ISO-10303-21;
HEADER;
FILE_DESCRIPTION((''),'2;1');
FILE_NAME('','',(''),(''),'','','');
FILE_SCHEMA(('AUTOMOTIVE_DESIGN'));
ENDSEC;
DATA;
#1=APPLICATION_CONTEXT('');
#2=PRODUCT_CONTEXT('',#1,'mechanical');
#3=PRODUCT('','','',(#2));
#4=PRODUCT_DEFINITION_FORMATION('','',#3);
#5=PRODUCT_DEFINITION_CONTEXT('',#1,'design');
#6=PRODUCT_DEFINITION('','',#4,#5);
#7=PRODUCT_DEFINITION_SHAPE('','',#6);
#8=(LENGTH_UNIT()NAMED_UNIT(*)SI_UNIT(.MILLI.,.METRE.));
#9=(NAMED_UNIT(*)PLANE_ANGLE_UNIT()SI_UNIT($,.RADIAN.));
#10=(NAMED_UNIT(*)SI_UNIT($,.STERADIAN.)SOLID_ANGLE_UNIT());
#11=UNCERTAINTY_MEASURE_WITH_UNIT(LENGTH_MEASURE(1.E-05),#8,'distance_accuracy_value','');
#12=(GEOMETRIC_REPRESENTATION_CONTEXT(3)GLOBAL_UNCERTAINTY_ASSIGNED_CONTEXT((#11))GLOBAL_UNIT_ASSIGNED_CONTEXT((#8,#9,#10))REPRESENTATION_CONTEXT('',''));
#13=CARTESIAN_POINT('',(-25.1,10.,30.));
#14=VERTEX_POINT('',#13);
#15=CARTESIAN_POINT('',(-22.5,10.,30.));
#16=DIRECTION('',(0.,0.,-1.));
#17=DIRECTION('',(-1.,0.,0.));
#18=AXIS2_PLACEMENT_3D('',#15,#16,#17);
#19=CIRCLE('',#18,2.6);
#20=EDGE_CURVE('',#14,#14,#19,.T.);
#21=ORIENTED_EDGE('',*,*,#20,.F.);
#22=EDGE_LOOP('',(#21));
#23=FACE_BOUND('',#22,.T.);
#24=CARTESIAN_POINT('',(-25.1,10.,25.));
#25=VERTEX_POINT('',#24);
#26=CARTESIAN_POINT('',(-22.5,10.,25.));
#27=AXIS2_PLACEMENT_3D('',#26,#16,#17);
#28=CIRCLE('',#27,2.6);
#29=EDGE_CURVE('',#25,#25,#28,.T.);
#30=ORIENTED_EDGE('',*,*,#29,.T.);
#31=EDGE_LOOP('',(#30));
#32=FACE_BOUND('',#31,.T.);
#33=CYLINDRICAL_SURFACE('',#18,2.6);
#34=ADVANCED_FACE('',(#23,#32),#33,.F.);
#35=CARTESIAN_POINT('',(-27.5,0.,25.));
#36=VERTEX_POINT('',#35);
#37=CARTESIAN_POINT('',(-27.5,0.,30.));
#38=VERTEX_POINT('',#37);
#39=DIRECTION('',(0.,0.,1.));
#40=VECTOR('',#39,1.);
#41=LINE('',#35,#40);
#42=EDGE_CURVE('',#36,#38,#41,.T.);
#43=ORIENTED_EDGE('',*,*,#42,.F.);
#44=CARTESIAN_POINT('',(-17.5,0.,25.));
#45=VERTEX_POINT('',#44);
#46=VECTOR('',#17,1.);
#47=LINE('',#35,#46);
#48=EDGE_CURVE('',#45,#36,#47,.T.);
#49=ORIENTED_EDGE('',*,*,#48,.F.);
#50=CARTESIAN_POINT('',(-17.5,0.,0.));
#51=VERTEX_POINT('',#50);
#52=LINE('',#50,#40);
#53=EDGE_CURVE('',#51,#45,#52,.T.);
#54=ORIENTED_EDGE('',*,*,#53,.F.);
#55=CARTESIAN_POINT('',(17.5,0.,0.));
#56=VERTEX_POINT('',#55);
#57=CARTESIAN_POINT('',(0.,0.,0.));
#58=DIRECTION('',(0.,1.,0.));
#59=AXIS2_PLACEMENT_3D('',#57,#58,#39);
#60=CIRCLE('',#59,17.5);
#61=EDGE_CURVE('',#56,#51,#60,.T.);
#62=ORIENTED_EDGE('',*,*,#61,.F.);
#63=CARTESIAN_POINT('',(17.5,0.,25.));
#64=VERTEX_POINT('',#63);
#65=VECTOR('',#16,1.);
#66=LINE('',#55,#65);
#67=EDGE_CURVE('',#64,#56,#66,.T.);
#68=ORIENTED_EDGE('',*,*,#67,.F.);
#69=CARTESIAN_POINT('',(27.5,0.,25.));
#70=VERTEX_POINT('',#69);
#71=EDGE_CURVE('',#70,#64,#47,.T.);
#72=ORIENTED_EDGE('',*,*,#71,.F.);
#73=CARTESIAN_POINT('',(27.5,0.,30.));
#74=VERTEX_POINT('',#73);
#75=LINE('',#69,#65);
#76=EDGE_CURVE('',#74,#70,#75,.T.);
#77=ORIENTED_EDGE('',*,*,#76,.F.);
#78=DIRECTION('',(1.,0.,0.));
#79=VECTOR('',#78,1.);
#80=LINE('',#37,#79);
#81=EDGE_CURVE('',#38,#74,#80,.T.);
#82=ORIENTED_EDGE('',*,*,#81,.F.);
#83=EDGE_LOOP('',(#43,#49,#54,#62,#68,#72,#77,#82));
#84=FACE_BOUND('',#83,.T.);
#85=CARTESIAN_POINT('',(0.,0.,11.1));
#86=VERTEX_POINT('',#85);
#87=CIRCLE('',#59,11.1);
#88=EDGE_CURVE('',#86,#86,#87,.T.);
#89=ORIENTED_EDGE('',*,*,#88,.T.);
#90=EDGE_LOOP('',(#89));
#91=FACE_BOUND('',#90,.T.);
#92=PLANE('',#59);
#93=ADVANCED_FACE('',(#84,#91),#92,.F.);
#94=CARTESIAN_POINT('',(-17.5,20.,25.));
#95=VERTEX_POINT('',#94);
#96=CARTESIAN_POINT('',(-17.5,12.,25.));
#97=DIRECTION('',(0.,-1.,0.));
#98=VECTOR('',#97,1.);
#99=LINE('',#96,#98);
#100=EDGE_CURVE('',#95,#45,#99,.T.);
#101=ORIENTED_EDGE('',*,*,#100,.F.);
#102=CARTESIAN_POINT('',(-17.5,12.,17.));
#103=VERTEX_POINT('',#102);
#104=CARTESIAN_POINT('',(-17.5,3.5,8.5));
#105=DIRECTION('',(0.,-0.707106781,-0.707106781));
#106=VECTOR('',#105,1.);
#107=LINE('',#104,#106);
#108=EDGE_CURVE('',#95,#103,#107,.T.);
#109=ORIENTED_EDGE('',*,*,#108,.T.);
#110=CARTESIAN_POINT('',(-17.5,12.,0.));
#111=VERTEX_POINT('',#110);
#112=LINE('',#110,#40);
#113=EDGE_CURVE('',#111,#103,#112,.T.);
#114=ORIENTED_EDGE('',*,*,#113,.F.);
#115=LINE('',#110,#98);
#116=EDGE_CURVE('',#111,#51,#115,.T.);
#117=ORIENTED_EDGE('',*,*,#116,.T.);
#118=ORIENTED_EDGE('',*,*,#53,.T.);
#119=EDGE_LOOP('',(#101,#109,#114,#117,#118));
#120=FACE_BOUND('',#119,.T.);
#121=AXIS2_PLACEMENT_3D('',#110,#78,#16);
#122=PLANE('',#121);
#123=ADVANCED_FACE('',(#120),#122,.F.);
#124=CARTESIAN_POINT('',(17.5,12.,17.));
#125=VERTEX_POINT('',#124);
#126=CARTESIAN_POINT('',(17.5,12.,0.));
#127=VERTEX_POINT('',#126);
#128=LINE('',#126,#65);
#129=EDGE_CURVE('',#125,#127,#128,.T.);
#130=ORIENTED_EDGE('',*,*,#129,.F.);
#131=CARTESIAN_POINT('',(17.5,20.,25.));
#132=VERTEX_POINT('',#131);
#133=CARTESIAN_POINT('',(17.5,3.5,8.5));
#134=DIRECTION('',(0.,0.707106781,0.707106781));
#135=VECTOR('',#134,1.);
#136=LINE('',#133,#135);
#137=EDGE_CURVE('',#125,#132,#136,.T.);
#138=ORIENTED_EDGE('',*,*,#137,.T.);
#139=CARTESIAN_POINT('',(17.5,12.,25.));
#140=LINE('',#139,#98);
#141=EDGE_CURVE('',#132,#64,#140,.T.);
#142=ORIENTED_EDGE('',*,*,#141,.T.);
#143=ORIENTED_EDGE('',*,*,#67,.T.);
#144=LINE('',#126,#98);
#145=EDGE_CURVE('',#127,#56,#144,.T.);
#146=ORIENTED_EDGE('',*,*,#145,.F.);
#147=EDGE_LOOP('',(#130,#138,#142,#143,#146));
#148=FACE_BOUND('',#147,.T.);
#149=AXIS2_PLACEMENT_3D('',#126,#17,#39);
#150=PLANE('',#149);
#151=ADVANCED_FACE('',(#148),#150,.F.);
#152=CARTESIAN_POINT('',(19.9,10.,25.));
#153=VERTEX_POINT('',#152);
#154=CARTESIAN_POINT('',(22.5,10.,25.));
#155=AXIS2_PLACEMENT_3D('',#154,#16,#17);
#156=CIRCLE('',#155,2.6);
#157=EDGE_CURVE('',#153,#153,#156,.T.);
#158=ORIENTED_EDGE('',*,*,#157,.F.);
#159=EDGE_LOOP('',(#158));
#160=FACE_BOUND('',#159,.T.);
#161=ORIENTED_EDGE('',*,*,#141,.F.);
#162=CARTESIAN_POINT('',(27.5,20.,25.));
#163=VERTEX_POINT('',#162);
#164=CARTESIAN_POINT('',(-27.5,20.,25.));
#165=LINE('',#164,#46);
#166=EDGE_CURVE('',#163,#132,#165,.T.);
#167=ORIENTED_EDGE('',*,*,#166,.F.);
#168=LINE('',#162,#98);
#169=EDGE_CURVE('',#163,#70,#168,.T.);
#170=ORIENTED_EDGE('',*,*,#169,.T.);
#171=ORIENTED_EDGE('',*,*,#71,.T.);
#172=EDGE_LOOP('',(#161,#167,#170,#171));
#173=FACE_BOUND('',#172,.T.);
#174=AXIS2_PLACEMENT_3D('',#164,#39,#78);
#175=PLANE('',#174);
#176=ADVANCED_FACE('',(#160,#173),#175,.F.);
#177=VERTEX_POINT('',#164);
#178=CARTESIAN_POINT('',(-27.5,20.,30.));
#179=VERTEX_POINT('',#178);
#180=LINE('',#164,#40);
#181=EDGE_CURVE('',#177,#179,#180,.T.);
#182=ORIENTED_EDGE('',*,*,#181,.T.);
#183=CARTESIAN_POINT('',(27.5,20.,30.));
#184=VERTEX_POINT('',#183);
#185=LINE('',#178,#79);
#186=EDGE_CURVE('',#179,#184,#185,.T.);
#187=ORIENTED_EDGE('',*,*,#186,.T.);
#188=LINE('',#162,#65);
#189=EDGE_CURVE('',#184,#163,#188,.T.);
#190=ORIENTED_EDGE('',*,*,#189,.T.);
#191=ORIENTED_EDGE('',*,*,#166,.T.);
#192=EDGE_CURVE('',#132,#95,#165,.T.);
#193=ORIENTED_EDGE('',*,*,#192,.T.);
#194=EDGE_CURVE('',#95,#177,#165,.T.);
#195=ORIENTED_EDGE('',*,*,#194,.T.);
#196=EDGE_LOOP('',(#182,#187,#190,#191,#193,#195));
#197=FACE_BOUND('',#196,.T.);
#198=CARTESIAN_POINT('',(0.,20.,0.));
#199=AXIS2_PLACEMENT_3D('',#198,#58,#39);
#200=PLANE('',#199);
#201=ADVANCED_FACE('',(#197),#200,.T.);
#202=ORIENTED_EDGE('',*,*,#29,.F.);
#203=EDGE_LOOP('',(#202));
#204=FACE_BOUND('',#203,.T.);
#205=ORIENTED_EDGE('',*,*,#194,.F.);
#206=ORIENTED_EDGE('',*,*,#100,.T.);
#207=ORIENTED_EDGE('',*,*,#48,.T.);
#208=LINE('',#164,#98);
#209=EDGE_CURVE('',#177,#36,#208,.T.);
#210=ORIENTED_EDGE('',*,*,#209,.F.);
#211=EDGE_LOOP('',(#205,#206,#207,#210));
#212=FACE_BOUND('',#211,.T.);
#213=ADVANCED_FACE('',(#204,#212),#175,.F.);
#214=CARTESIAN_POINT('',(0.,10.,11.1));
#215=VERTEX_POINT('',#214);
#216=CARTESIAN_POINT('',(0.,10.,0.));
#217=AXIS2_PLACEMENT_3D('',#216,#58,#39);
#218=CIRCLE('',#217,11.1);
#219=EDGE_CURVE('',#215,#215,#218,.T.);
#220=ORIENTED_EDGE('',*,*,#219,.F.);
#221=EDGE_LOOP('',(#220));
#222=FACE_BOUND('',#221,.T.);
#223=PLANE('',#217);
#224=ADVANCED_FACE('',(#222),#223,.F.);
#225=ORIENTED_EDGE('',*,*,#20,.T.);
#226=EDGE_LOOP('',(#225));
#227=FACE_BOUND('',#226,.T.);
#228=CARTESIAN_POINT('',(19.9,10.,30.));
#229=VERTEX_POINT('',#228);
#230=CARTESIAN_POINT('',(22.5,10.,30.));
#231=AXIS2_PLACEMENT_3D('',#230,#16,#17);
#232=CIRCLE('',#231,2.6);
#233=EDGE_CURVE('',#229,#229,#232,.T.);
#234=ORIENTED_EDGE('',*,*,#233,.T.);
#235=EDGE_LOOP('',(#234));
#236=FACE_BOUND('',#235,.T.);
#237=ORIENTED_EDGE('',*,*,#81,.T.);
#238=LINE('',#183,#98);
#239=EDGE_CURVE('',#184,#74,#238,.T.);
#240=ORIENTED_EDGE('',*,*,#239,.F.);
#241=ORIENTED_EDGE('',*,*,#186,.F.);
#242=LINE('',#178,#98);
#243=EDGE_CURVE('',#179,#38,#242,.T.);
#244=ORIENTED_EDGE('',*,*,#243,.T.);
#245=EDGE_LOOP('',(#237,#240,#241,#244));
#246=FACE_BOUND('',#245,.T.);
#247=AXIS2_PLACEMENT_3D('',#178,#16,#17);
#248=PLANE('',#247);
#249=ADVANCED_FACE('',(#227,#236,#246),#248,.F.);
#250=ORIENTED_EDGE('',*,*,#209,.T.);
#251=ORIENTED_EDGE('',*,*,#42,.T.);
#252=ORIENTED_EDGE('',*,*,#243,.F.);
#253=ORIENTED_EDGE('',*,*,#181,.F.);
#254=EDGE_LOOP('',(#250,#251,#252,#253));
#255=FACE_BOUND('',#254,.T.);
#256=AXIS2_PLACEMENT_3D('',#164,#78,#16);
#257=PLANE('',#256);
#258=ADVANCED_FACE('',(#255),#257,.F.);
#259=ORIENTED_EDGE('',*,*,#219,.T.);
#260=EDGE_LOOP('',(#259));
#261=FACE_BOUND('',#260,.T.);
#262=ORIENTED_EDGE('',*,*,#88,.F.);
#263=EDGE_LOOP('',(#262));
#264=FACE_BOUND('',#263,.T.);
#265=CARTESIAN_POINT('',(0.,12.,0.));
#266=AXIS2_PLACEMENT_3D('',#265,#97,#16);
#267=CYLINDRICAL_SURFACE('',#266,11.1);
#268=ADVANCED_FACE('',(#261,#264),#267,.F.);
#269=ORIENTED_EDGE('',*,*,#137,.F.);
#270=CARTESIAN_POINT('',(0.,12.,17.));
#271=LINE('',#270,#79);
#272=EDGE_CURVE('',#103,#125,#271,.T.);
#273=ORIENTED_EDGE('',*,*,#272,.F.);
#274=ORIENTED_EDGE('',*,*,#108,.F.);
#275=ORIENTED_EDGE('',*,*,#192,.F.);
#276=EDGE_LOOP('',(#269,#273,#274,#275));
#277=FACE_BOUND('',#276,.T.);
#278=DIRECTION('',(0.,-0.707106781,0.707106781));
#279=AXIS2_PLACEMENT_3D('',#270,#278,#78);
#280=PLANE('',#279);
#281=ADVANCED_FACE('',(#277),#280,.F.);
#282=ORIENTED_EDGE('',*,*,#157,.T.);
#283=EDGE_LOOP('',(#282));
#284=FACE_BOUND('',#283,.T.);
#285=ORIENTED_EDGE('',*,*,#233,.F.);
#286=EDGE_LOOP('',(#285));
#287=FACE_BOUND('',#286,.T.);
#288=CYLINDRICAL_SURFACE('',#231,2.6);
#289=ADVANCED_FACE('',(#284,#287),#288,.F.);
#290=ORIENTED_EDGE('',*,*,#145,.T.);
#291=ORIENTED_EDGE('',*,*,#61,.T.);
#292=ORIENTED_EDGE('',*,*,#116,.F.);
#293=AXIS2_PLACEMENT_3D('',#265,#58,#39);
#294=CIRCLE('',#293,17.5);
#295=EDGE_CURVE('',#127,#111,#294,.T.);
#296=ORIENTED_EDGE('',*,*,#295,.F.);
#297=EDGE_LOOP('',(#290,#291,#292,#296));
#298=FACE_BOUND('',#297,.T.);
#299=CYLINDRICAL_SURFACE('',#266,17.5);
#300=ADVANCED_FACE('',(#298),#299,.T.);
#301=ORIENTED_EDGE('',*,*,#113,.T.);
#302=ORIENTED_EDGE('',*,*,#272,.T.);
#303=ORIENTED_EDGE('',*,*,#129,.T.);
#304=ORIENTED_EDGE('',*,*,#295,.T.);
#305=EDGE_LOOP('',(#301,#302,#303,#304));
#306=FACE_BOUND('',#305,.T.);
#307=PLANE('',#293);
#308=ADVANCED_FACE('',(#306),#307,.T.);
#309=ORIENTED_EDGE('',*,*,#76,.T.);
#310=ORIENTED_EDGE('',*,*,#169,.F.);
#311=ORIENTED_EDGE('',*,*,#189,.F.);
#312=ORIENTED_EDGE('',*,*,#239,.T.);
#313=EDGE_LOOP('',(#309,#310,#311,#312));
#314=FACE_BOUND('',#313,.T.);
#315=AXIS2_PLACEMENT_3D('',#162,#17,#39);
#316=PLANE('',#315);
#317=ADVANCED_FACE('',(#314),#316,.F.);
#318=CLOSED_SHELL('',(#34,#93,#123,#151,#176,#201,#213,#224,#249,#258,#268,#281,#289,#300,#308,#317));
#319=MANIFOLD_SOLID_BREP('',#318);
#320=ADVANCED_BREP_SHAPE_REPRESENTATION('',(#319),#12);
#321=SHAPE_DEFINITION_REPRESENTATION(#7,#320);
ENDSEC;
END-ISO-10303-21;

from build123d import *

# Parameters (mm, degrees)
SKETCH1_R           = 11.1
BOSS_EXTRUDE1_DEPTH = 12
BOSS_EXTRUDE2_START = -2
SKETCH3_R           = 11.1
BOSS_EXTRUDE2_DEPTH = 2
SKETCH4_W           = 55
SKETCH4_H           = 5
BOSS_EXTRUDE3_DEPTH = 20
SKETCH5_R           = 2.6
CUT_EXTRUDE1_DEPTH  = 55.428852643
CHAMFER1_SIZE       = 8


with BuildPart() as part:
    # Sketch1 → Boss-Extrude1 (new body)
    with BuildSketch(Plane(origin=(0, 0, 0), x_dir=(1, 0, 0), z_dir=(0, 1, 0))):
        with BuildLine():
            Line((-17.5, 0), (-17.5, -25))
            Line((-17.5, -25), (17.5, -25))
            Line((17.5, -25), (17.5, 0))
            ThreePointArc((17.5, 0), (0, 17.5), (-17.5, 0))
        make_face()
        with Locations(Location((0, 0, 0), (0, 0, 270))):
            Circle(SKETCH1_R, mode=Mode.SUBTRACT)
    extrude(amount=BOSS_EXTRUDE1_DEPTH)

    # Sketch3 → Boss-Extrude2 (add)
    with BuildSketch(Plane(origin=(0, 12, 0), x_dir=(1, 0, 0), z_dir=(0, 1, 0)).offset(BOSS_EXTRUDE2_START)):
        with Locations(Location((0, 0, 0), (0, 0, 270))):
            Circle(SKETCH3_R)
    extrude(amount=BOSS_EXTRUDE2_DEPTH)

    # Sketch4 → Boss-Extrude3 (add)
    with BuildSketch(Plane(origin=(0, 0, 0), x_dir=(1, 0, 0), z_dir=(0, 1, 0))):
        with Locations((0, -27.5)):
            Rectangle(SKETCH4_W, SKETCH4_H)
    extrude(amount=BOSS_EXTRUDE3_DEPTH)

    # Sketch5 → Cut-Extrude1 (cut, through all)
    with BuildSketch(Plane(origin=(0, 0, 25), x_dir=(-1, 0, 0), z_dir=(0, 0, -1))):
        with Locations((22.5, 10)):
            Circle(SKETCH5_R)
        with Locations((-22.5, 10)):
            Circle(SKETCH5_R)
    extrude(amount=-CUT_EXTRUDE1_DEPTH, mode=Mode.SUBTRACT)

    # Chamfer1
    chamfer1_edges = [part.edges().sort_by_distance(p)[0] for p in [
        (0, 12, 25),
    ]]
    chamfer(chamfer1_edges, length=CHAMFER1_SIZE - 0.0001)  # a hair under: the kernel refuses the full size


solid = part.part
